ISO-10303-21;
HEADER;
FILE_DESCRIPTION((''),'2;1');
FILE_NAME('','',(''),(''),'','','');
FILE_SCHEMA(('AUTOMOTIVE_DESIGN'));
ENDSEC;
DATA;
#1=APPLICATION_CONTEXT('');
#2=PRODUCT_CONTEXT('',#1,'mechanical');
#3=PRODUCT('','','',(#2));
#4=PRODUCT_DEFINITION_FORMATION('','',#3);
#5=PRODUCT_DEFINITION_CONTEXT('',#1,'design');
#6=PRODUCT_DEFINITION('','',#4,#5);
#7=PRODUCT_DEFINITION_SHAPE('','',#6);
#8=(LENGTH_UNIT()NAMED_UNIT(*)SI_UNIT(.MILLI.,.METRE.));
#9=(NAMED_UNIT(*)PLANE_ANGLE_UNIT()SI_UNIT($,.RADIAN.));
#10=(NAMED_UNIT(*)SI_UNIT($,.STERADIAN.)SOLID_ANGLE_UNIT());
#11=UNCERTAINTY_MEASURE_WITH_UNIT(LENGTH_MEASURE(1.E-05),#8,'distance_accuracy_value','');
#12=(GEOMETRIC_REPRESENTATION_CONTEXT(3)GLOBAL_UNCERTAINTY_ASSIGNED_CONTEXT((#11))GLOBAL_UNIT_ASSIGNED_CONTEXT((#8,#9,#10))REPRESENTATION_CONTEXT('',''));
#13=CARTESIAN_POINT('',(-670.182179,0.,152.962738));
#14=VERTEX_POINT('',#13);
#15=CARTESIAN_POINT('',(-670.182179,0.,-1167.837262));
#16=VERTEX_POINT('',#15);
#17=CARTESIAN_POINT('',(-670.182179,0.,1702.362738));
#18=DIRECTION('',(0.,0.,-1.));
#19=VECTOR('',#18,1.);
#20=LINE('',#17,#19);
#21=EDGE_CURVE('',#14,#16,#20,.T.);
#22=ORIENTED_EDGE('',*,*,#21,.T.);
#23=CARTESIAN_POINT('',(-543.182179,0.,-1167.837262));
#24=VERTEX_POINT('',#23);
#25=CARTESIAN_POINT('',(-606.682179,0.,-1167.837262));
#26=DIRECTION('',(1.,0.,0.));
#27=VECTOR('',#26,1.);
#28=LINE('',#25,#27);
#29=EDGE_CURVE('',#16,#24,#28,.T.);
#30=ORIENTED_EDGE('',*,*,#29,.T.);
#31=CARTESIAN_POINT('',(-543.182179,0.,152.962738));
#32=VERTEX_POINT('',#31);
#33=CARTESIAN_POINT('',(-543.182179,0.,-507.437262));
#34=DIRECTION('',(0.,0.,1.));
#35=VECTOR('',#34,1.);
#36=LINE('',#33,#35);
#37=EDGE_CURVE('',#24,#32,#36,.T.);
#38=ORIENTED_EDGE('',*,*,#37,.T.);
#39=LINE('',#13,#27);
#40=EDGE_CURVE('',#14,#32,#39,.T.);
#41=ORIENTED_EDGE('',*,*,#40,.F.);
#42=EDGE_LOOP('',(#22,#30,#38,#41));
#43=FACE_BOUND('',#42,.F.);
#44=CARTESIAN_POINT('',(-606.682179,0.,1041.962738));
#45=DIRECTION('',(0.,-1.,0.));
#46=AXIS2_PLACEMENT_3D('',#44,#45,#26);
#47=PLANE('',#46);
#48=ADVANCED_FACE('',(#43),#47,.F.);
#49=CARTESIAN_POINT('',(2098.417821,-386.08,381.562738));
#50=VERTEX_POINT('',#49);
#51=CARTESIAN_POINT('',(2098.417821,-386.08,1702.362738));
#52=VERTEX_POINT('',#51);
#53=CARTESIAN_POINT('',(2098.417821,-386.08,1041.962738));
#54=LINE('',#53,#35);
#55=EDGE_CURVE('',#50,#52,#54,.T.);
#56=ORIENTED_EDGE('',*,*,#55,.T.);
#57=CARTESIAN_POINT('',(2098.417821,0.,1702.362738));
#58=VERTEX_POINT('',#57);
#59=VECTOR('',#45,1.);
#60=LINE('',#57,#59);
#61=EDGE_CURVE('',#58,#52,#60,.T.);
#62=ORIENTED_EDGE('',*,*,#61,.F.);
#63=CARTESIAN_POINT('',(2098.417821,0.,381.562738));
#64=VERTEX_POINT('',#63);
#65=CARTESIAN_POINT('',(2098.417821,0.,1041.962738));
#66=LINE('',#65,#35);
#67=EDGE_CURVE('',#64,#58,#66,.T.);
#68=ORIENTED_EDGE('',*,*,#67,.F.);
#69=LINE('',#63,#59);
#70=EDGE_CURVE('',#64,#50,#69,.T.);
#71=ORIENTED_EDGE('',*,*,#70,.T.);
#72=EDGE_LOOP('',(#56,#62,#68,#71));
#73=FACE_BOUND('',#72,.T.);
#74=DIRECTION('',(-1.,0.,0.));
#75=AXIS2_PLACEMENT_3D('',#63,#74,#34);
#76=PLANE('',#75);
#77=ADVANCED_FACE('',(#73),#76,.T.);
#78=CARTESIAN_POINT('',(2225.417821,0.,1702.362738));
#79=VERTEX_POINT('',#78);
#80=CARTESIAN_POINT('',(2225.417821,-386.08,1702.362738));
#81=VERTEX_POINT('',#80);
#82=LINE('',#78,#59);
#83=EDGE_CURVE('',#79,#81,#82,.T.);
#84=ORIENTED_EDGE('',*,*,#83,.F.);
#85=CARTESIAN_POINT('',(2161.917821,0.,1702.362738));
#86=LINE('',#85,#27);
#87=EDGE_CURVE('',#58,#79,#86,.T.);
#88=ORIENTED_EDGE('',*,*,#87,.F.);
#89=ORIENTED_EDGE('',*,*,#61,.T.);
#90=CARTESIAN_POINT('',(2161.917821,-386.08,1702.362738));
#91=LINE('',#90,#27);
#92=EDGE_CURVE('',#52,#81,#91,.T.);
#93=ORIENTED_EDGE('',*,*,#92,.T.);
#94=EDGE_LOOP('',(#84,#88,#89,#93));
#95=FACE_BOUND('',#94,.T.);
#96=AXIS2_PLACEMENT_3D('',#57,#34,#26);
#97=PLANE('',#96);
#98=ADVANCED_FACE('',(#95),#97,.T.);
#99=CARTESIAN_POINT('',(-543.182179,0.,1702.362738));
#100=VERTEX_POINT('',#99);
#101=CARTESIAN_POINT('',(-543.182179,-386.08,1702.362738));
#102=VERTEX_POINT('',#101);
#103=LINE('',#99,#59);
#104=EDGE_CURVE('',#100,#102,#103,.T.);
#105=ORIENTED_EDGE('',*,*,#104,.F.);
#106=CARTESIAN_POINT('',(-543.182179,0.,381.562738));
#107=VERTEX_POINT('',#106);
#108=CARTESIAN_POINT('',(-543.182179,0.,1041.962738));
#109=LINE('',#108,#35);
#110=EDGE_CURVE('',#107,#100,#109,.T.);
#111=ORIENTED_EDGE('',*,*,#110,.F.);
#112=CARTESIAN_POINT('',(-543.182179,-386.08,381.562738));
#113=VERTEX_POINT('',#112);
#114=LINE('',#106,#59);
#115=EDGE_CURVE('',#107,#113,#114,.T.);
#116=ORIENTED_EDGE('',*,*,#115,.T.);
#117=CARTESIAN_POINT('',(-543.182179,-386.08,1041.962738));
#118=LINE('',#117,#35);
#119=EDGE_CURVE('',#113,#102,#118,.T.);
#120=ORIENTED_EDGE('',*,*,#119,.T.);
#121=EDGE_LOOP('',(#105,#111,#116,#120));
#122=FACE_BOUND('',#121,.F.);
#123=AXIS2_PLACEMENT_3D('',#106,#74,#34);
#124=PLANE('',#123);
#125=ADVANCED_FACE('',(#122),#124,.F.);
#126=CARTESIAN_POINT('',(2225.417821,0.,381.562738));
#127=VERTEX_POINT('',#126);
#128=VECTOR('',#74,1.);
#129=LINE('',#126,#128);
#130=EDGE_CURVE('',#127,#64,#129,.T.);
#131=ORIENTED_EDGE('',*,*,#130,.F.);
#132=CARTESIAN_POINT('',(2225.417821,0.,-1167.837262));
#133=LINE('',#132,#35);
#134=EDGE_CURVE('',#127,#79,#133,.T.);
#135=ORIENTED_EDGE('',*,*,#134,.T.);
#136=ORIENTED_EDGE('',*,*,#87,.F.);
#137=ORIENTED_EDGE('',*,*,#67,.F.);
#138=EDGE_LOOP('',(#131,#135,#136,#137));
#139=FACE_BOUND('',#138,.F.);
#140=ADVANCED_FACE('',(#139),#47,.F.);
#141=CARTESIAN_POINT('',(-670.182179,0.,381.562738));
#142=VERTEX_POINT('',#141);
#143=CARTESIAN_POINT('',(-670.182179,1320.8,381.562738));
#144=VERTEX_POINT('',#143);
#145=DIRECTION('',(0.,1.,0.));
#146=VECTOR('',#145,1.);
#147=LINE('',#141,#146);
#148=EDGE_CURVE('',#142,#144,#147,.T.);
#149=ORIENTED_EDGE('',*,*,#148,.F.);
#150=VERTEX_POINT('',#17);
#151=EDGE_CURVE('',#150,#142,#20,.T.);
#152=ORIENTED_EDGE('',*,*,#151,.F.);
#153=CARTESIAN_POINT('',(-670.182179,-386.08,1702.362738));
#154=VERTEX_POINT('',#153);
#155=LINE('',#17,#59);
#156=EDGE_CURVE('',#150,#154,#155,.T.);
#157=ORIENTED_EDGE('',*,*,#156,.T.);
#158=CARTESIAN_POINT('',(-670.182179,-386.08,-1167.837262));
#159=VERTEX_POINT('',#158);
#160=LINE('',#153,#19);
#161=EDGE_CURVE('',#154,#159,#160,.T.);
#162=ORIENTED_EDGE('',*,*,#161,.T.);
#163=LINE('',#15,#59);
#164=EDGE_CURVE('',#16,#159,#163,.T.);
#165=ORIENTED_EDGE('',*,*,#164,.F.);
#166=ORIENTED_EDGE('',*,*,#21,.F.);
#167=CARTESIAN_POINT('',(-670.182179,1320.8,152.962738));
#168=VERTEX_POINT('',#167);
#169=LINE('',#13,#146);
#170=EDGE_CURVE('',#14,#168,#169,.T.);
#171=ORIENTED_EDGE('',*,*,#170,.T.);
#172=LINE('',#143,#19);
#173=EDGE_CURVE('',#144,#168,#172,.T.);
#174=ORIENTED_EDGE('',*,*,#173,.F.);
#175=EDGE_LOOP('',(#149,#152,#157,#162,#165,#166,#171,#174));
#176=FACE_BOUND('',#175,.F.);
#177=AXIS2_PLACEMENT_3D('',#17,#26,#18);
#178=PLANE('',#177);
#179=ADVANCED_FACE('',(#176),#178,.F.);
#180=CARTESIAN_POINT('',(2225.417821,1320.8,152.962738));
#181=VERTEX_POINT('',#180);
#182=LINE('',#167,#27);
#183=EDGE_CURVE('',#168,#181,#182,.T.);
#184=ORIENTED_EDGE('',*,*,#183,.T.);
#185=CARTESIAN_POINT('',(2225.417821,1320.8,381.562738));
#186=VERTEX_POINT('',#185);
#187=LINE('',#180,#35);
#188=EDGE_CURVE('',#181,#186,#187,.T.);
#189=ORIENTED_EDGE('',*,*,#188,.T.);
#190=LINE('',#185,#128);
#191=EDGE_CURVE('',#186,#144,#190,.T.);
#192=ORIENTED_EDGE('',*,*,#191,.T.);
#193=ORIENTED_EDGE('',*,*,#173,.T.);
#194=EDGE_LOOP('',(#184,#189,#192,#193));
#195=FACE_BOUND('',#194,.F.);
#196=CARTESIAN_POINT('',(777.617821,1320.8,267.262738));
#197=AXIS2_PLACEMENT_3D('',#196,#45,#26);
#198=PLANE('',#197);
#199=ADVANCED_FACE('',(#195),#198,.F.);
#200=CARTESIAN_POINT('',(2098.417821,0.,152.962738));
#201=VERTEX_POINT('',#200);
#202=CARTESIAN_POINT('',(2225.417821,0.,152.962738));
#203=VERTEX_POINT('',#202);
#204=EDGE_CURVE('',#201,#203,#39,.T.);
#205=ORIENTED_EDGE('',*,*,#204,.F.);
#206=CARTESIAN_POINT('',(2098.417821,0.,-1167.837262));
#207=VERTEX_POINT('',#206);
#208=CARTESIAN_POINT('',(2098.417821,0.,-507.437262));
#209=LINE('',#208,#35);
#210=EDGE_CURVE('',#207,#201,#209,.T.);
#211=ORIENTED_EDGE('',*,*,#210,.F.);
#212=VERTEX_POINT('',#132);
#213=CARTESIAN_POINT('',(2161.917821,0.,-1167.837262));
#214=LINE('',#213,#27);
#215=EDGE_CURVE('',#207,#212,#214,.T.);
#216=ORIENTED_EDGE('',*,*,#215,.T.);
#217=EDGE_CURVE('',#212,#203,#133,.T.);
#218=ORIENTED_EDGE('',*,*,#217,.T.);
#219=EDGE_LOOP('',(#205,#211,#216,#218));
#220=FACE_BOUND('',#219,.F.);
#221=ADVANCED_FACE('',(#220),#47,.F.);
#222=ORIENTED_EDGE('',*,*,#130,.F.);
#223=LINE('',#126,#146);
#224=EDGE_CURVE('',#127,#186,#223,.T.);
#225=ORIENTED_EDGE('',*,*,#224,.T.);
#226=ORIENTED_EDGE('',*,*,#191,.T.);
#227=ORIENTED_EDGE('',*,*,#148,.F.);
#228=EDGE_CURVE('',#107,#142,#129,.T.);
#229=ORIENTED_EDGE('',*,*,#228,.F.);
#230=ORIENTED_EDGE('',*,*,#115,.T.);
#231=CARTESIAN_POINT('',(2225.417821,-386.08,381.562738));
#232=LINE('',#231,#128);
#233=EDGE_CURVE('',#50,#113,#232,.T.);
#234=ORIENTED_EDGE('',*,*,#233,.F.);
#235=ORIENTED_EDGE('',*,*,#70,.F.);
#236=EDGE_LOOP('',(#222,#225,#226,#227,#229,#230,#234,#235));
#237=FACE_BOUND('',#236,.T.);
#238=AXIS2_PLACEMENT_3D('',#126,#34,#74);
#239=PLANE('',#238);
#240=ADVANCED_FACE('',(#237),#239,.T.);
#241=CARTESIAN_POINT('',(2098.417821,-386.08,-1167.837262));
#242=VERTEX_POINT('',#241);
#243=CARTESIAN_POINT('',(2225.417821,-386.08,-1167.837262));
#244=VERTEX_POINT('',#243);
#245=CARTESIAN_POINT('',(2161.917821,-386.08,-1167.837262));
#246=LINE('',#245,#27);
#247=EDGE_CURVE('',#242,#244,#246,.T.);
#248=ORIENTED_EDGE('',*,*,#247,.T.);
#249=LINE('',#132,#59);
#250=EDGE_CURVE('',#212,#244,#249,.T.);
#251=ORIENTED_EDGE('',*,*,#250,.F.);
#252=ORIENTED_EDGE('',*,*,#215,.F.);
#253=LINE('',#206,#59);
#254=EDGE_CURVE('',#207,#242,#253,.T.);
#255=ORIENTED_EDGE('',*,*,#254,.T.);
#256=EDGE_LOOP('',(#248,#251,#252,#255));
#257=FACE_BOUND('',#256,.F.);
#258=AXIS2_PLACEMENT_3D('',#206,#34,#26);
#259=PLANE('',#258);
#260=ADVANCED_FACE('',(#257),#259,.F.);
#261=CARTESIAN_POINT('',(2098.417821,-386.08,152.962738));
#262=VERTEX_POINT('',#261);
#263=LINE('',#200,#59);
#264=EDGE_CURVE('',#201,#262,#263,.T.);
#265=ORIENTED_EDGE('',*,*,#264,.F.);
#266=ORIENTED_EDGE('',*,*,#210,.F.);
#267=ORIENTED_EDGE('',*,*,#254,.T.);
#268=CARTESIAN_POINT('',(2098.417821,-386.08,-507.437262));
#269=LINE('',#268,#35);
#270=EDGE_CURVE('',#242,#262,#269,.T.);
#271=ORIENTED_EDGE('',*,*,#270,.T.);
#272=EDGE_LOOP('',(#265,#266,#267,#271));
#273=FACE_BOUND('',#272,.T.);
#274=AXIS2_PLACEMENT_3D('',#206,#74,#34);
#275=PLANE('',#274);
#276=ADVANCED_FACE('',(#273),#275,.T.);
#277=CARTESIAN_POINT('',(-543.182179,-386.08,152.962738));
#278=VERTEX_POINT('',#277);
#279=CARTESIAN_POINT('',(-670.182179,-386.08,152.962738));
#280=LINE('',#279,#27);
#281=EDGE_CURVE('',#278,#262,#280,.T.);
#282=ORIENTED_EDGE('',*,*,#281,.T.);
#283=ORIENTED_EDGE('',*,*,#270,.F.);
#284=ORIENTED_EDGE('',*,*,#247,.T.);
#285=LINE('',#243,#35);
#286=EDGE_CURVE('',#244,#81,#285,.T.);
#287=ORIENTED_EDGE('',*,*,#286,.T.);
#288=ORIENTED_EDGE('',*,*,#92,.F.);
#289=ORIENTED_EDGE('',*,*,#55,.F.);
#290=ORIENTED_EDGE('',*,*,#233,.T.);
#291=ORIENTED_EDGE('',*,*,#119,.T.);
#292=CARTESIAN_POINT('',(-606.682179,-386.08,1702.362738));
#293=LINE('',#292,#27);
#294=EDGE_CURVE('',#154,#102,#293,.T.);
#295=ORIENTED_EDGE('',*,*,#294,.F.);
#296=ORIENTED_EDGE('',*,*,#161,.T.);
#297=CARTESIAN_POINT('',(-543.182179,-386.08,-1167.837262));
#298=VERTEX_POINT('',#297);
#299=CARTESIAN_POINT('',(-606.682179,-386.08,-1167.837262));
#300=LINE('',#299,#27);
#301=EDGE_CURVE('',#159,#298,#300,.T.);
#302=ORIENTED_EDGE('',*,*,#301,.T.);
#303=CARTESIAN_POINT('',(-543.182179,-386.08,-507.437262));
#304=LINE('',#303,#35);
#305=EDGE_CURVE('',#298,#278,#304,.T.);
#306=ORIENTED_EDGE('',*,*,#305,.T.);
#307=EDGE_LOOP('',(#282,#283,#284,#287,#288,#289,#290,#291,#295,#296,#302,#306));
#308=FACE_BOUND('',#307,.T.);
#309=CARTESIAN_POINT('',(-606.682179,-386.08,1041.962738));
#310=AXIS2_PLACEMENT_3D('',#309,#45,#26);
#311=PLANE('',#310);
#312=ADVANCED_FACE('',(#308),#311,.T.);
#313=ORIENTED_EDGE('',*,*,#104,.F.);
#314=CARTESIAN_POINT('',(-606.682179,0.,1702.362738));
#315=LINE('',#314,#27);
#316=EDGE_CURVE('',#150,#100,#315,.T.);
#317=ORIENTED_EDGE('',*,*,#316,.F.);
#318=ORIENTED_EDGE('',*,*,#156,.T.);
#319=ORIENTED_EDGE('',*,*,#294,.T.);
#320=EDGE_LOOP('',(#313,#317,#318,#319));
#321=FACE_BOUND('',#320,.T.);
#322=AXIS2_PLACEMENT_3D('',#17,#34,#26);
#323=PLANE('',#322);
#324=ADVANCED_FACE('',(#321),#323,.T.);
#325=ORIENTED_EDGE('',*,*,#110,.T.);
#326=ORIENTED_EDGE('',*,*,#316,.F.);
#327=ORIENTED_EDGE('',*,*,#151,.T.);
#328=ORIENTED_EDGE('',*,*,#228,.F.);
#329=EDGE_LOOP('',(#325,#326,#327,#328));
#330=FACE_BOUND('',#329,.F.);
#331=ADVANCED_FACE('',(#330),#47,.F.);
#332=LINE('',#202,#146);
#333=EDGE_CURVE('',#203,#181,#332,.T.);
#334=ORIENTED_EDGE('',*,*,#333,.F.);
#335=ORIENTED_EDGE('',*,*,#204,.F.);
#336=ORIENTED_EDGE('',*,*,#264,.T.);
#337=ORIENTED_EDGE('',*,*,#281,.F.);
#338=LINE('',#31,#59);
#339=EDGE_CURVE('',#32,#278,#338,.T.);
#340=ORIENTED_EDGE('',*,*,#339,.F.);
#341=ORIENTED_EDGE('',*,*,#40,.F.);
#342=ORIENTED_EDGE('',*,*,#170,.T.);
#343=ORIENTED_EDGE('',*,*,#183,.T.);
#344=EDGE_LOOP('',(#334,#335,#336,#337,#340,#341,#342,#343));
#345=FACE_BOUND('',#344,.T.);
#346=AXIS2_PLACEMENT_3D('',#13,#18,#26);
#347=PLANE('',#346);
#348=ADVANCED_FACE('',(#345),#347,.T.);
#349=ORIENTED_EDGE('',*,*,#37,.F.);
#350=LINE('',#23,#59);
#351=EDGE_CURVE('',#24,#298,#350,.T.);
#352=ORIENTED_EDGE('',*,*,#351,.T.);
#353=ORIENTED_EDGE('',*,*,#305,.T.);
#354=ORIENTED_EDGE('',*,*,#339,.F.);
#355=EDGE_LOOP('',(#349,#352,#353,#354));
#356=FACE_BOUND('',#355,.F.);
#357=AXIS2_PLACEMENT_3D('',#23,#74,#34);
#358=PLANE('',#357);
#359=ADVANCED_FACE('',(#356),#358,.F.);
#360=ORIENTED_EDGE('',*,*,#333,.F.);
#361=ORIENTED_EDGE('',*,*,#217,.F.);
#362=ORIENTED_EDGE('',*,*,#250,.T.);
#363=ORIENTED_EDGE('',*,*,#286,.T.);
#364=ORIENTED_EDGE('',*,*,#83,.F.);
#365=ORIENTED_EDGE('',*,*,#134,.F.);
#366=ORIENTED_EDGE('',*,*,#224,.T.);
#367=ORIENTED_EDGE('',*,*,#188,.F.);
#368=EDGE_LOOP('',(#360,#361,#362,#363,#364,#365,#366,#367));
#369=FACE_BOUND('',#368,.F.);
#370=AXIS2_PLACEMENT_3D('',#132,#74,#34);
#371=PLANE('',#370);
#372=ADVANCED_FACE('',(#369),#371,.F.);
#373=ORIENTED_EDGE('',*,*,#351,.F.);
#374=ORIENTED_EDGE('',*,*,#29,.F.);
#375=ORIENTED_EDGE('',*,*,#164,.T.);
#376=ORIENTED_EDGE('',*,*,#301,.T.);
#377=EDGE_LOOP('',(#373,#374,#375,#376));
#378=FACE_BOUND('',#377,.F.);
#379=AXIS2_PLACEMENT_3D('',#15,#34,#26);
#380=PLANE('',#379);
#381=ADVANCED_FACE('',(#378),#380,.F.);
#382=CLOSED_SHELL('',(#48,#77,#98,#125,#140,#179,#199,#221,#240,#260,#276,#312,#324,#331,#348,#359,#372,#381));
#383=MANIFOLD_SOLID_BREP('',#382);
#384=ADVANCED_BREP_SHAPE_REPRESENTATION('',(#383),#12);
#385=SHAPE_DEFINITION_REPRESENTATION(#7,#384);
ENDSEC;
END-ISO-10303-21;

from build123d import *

# Parameters (mm, degrees)
F2_DEPTH = 1320.8
F1_W     = 127
F1_H     = 1320.8
F3_DEPTH = 386.08


# Not quite as in the source:
# - a feature names something its author has since deleted; it is built from what else it names


with BuildPart() as f2:
    # F1 (on Front) → F2 (new body)
    with BuildSketch(Plane.XZ):
        Polygon((-543.1821789121, 381.5627378464), (-670.1821789121, 381.5627378464), (-670.1821789121, 152.9627378464), (-543.1821789121, 152.9627378464), (2098.4178210879, 152.9627378464), (2225.4178210879, 152.9627378464), (2225.4178210879, 381.5627378464), (2098.4178210879, 381.5627378464), align=None)
    extrude(amount=-F2_DEPTH)

    # F1 (on Front) → F3 (join)
    with BuildSketch(Plane.XZ):
        with Locations((-606.6821789121, 1041.9627378464)):
            Rectangle(F1_W, F1_H)
        Polygon((-543.1821789121, 381.5627378464), (-670.1821789121, 381.5627378464), (-670.1821789121, 152.9627378464), (-543.1821789121, 152.9627378464), (2098.4178210879, 152.9627378464), (2225.4178210879, 152.9627378464), (2225.4178210879, 381.5627378464), (2098.4178210879, 381.5627378464), align=None)
        with Locations((-606.6821789121, -507.4372621536)):
            Rectangle(F1_W, F1_H)
        with Locations((2161.9178210879, 1041.9627378464)):
            Rectangle(F1_W, F1_H)
        with Locations((2161.9178210879, -507.4372621536)):
            Rectangle(F1_W, F1_H)
    extrude(amount=F3_DEPTH)


solid = f2.part
